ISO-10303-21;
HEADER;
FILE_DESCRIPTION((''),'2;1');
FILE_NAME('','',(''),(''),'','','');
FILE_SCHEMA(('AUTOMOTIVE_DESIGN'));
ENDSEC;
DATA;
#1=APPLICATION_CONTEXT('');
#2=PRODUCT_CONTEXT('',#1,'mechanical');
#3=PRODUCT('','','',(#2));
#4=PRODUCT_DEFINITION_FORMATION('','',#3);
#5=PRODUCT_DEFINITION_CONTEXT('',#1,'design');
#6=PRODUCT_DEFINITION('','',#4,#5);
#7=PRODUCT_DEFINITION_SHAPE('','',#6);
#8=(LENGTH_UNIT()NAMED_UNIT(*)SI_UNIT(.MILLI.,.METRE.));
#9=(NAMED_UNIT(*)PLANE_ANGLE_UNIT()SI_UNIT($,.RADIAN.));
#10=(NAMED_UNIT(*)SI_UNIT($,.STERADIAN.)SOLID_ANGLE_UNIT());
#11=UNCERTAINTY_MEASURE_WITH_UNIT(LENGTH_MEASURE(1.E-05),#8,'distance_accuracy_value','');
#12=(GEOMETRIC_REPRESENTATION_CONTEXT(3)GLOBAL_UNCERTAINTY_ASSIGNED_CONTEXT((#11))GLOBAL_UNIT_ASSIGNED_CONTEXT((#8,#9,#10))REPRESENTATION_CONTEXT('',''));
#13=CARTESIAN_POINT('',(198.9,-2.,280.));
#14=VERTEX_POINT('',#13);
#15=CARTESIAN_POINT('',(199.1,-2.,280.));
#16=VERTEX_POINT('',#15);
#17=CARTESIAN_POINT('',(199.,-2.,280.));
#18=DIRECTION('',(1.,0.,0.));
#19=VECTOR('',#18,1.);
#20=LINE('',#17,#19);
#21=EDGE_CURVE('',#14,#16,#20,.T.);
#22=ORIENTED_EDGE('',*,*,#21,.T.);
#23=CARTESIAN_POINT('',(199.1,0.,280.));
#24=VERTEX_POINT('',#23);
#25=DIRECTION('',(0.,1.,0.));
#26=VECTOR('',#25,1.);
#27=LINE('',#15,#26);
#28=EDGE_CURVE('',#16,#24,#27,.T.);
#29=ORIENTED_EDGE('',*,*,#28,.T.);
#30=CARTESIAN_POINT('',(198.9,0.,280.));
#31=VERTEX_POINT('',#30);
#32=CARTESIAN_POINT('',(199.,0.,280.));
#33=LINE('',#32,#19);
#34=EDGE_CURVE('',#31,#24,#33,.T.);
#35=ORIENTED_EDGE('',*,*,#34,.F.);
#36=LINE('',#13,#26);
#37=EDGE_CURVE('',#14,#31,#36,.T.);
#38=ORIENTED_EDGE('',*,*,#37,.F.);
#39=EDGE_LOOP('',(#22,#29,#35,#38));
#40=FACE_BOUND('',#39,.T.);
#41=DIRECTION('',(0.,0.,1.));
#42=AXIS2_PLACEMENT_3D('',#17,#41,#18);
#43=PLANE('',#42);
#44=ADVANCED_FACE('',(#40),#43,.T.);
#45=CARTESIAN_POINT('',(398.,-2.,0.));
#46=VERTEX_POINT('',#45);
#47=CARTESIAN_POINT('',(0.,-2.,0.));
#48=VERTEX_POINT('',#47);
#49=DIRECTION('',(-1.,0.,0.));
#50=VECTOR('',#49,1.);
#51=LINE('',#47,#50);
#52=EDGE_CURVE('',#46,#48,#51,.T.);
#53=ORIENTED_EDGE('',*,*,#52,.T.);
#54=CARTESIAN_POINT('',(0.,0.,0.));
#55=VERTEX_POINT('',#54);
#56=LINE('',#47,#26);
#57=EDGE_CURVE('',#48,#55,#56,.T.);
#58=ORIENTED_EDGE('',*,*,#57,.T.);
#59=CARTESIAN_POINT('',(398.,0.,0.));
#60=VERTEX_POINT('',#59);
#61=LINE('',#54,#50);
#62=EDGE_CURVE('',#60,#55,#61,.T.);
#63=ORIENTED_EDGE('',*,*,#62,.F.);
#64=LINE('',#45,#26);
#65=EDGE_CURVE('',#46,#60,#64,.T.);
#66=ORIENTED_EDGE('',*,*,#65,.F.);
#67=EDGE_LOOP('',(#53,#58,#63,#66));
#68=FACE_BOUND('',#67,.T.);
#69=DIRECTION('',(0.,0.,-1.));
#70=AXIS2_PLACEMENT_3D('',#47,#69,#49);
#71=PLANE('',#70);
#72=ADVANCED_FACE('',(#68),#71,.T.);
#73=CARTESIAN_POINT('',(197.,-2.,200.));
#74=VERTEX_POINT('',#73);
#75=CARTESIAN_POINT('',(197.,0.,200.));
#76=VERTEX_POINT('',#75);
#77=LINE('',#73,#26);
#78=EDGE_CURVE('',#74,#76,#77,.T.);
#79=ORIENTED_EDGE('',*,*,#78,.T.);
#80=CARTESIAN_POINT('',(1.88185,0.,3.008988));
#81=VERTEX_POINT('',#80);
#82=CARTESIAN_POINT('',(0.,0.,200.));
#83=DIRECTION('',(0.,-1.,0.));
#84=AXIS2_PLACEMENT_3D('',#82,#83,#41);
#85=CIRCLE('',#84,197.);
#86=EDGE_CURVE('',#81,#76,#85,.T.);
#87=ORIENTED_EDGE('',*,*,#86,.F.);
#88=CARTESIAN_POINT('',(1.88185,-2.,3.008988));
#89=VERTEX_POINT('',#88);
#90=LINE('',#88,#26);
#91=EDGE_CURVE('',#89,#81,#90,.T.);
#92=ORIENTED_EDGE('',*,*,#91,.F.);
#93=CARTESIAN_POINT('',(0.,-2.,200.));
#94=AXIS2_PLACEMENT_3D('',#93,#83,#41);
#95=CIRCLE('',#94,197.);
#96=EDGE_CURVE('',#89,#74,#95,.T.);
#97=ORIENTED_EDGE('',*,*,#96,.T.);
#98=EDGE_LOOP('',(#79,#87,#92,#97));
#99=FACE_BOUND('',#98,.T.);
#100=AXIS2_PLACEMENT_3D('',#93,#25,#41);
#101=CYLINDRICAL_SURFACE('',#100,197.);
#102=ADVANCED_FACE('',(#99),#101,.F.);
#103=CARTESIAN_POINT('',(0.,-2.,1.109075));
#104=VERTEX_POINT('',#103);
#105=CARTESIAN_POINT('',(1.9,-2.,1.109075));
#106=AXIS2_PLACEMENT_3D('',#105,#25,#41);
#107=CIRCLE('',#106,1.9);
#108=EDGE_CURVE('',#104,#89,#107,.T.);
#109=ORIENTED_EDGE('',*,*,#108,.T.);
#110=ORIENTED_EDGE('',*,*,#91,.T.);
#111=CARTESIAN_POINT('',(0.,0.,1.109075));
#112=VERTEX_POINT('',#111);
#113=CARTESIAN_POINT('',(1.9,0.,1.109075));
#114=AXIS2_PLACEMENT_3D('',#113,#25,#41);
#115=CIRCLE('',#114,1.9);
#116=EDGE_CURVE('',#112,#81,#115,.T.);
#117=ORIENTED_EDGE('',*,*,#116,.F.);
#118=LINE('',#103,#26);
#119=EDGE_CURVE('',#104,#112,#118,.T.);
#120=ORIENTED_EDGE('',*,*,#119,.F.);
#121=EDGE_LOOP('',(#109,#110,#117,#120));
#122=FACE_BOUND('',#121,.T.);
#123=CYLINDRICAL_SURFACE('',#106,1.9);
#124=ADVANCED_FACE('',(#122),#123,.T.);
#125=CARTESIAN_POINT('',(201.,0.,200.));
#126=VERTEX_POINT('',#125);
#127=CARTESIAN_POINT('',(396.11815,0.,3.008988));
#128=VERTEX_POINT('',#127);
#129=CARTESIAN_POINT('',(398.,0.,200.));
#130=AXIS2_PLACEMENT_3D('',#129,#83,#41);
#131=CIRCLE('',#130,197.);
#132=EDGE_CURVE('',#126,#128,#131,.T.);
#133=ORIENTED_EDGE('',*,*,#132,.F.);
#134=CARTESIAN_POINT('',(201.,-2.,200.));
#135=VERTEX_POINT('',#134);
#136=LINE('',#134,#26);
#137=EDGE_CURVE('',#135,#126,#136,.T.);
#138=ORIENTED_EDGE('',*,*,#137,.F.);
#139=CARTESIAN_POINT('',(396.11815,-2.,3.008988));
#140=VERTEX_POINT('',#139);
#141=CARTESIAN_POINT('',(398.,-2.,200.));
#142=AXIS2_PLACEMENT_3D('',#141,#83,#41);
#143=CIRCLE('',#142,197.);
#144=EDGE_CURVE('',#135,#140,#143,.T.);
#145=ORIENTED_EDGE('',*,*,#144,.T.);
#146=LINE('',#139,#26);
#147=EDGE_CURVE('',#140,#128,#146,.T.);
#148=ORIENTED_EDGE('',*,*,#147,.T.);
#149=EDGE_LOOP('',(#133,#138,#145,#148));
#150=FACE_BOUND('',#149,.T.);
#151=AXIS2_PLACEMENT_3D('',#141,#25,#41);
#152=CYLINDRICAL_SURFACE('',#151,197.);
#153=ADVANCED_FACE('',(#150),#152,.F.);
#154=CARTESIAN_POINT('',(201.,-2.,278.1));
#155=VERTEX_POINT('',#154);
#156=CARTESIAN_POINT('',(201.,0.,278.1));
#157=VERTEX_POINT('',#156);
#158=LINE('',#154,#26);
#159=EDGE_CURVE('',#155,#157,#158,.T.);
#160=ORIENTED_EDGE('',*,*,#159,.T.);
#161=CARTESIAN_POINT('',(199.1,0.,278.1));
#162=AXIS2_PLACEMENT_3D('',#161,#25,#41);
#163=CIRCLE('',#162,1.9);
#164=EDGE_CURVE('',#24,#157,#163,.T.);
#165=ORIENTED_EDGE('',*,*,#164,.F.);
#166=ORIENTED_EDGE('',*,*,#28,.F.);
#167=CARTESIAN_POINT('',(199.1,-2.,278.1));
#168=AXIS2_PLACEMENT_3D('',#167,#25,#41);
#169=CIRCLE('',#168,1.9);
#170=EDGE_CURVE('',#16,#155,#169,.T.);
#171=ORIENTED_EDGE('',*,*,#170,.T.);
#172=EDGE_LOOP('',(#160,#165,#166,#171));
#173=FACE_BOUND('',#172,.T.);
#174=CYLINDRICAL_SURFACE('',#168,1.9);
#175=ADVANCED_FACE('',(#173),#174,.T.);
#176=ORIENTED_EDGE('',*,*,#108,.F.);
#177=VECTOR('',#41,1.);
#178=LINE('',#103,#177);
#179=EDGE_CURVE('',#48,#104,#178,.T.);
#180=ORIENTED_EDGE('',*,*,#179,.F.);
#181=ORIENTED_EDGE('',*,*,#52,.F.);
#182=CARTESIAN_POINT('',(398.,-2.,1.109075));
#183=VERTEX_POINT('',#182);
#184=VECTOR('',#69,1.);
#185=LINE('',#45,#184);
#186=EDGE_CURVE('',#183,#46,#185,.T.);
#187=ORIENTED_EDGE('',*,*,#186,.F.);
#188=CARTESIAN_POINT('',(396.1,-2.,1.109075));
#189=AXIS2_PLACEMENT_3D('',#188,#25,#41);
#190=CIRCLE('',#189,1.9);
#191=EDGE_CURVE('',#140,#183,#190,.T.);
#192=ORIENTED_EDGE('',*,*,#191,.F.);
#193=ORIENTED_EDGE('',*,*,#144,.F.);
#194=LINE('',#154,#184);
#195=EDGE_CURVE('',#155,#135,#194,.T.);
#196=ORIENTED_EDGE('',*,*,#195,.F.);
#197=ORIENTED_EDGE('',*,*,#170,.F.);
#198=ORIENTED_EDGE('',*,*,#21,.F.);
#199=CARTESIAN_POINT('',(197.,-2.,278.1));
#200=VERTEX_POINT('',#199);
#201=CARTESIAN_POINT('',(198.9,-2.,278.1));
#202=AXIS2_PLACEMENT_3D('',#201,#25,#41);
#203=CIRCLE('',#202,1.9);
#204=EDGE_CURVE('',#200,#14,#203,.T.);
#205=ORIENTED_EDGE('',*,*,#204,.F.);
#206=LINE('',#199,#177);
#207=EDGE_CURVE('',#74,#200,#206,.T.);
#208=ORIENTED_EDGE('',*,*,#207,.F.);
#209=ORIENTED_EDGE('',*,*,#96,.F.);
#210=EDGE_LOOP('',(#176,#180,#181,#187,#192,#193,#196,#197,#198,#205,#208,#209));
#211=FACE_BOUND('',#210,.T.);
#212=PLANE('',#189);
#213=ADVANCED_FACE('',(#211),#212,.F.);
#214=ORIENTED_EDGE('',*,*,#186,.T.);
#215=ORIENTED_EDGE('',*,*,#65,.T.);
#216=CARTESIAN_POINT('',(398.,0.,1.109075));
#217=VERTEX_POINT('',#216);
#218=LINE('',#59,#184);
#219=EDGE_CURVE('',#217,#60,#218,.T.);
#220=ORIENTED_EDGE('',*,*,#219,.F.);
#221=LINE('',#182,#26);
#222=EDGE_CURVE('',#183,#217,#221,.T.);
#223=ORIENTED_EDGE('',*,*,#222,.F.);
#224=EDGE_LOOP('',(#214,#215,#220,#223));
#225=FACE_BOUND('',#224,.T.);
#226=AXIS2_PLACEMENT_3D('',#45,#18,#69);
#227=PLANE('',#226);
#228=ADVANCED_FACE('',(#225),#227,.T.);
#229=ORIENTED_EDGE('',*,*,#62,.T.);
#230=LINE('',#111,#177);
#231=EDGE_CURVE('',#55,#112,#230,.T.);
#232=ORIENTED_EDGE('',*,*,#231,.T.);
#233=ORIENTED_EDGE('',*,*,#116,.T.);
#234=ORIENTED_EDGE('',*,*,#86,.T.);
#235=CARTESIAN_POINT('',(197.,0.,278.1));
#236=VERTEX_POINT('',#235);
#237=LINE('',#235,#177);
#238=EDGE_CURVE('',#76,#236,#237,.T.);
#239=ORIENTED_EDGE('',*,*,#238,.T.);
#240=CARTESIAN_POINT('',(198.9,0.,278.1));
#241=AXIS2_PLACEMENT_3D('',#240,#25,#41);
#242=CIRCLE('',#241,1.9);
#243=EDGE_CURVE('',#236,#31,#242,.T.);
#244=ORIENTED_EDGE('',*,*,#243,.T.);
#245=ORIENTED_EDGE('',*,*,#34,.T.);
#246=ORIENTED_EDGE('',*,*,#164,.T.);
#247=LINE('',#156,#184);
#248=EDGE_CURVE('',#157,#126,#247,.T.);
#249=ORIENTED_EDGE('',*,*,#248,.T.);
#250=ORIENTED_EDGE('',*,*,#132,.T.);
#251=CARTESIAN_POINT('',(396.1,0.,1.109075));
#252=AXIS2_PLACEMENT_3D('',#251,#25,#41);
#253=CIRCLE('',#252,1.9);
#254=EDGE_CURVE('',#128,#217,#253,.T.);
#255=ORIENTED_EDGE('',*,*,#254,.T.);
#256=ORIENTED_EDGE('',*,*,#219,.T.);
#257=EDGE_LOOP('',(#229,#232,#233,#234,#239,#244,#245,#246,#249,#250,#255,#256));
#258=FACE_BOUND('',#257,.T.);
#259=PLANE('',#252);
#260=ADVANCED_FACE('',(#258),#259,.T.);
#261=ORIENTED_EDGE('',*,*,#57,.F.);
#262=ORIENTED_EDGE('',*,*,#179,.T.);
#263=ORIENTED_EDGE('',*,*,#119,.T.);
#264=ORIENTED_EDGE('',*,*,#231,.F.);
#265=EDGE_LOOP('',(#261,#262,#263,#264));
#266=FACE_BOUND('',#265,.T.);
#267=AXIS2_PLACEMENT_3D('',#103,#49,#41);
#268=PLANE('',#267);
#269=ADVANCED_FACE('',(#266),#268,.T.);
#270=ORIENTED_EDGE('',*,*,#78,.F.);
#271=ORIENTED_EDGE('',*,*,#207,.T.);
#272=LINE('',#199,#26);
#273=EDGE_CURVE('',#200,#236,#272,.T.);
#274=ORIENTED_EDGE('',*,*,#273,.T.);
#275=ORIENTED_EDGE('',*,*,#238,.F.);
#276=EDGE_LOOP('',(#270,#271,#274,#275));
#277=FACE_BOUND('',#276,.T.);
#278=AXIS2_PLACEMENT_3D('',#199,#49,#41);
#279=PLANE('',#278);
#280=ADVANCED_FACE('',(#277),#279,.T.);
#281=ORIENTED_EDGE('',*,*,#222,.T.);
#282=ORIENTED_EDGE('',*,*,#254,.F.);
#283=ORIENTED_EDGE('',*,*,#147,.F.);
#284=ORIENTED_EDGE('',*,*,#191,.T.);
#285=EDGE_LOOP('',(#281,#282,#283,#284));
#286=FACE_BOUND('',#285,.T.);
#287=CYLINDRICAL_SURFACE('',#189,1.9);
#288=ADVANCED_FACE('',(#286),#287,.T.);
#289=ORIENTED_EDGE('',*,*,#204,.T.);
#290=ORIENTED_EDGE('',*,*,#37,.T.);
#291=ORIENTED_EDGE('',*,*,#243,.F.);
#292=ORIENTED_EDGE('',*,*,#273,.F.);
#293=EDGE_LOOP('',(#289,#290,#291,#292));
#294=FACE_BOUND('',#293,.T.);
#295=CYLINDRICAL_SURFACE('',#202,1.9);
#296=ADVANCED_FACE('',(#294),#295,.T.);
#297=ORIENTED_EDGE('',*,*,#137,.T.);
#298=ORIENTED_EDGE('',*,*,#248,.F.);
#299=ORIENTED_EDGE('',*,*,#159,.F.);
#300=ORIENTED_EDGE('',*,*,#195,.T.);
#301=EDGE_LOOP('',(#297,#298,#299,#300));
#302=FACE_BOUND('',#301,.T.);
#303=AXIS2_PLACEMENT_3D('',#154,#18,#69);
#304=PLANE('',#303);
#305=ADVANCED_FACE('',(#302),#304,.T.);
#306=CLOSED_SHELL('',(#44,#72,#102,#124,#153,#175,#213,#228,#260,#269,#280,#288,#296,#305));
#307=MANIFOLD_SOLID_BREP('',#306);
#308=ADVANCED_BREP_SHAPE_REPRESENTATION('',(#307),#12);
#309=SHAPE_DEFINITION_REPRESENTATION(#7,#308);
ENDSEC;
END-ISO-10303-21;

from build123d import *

# Parameters (mm, degrees)
BASE_FLANGE1_DEPTH = 2


# Sheet-metal steps are written as plain solids
with BuildPart() as part:
    # Sketch1 → Base-Flange1 (new body)
    with BuildSketch(Plane(origin=(0, 0, 0), x_dir=(1, 0, 0), z_dir=(0, 1, 0))):
        with BuildLine():
            Line((0, 0), (398, 0))
            Line((398, 0), (398, -1.109075119))
            ThreePointArc((398, -1.109075119), (397.449904564, -2.446145673), (396.118149824, -3.008988429))
            ThreePointArc((396.118149824, -3.008988429), (258.03621096, -61.36689516), (201, -200))
            Line((201, -200), (201, -278.1))
            ThreePointArc((201, -278.1), (200.443502884, -279.443502884), (199.1, -280))
            Line((199.1, -280), (199, -280))
            Line((199, -280), (198.9, -280))
            ThreePointArc((198.9, -280), (197.556497116, -279.443502884), (197, -278.1))
            Line((197, -278.1), (197, -200))
            ThreePointArc((197, -200), (139.96378904, -61.36689516), (1.881850176, -3.008988429))
            ThreePointArc((1.881850176, -3.008988429), (0.550095436, -2.446145673), (0, -1.109075119))
            Line((0, -1.109075119), (0, 0))
        make_face()
    extrude(amount=-BASE_FLANGE1_DEPTH)


solid = part.part
